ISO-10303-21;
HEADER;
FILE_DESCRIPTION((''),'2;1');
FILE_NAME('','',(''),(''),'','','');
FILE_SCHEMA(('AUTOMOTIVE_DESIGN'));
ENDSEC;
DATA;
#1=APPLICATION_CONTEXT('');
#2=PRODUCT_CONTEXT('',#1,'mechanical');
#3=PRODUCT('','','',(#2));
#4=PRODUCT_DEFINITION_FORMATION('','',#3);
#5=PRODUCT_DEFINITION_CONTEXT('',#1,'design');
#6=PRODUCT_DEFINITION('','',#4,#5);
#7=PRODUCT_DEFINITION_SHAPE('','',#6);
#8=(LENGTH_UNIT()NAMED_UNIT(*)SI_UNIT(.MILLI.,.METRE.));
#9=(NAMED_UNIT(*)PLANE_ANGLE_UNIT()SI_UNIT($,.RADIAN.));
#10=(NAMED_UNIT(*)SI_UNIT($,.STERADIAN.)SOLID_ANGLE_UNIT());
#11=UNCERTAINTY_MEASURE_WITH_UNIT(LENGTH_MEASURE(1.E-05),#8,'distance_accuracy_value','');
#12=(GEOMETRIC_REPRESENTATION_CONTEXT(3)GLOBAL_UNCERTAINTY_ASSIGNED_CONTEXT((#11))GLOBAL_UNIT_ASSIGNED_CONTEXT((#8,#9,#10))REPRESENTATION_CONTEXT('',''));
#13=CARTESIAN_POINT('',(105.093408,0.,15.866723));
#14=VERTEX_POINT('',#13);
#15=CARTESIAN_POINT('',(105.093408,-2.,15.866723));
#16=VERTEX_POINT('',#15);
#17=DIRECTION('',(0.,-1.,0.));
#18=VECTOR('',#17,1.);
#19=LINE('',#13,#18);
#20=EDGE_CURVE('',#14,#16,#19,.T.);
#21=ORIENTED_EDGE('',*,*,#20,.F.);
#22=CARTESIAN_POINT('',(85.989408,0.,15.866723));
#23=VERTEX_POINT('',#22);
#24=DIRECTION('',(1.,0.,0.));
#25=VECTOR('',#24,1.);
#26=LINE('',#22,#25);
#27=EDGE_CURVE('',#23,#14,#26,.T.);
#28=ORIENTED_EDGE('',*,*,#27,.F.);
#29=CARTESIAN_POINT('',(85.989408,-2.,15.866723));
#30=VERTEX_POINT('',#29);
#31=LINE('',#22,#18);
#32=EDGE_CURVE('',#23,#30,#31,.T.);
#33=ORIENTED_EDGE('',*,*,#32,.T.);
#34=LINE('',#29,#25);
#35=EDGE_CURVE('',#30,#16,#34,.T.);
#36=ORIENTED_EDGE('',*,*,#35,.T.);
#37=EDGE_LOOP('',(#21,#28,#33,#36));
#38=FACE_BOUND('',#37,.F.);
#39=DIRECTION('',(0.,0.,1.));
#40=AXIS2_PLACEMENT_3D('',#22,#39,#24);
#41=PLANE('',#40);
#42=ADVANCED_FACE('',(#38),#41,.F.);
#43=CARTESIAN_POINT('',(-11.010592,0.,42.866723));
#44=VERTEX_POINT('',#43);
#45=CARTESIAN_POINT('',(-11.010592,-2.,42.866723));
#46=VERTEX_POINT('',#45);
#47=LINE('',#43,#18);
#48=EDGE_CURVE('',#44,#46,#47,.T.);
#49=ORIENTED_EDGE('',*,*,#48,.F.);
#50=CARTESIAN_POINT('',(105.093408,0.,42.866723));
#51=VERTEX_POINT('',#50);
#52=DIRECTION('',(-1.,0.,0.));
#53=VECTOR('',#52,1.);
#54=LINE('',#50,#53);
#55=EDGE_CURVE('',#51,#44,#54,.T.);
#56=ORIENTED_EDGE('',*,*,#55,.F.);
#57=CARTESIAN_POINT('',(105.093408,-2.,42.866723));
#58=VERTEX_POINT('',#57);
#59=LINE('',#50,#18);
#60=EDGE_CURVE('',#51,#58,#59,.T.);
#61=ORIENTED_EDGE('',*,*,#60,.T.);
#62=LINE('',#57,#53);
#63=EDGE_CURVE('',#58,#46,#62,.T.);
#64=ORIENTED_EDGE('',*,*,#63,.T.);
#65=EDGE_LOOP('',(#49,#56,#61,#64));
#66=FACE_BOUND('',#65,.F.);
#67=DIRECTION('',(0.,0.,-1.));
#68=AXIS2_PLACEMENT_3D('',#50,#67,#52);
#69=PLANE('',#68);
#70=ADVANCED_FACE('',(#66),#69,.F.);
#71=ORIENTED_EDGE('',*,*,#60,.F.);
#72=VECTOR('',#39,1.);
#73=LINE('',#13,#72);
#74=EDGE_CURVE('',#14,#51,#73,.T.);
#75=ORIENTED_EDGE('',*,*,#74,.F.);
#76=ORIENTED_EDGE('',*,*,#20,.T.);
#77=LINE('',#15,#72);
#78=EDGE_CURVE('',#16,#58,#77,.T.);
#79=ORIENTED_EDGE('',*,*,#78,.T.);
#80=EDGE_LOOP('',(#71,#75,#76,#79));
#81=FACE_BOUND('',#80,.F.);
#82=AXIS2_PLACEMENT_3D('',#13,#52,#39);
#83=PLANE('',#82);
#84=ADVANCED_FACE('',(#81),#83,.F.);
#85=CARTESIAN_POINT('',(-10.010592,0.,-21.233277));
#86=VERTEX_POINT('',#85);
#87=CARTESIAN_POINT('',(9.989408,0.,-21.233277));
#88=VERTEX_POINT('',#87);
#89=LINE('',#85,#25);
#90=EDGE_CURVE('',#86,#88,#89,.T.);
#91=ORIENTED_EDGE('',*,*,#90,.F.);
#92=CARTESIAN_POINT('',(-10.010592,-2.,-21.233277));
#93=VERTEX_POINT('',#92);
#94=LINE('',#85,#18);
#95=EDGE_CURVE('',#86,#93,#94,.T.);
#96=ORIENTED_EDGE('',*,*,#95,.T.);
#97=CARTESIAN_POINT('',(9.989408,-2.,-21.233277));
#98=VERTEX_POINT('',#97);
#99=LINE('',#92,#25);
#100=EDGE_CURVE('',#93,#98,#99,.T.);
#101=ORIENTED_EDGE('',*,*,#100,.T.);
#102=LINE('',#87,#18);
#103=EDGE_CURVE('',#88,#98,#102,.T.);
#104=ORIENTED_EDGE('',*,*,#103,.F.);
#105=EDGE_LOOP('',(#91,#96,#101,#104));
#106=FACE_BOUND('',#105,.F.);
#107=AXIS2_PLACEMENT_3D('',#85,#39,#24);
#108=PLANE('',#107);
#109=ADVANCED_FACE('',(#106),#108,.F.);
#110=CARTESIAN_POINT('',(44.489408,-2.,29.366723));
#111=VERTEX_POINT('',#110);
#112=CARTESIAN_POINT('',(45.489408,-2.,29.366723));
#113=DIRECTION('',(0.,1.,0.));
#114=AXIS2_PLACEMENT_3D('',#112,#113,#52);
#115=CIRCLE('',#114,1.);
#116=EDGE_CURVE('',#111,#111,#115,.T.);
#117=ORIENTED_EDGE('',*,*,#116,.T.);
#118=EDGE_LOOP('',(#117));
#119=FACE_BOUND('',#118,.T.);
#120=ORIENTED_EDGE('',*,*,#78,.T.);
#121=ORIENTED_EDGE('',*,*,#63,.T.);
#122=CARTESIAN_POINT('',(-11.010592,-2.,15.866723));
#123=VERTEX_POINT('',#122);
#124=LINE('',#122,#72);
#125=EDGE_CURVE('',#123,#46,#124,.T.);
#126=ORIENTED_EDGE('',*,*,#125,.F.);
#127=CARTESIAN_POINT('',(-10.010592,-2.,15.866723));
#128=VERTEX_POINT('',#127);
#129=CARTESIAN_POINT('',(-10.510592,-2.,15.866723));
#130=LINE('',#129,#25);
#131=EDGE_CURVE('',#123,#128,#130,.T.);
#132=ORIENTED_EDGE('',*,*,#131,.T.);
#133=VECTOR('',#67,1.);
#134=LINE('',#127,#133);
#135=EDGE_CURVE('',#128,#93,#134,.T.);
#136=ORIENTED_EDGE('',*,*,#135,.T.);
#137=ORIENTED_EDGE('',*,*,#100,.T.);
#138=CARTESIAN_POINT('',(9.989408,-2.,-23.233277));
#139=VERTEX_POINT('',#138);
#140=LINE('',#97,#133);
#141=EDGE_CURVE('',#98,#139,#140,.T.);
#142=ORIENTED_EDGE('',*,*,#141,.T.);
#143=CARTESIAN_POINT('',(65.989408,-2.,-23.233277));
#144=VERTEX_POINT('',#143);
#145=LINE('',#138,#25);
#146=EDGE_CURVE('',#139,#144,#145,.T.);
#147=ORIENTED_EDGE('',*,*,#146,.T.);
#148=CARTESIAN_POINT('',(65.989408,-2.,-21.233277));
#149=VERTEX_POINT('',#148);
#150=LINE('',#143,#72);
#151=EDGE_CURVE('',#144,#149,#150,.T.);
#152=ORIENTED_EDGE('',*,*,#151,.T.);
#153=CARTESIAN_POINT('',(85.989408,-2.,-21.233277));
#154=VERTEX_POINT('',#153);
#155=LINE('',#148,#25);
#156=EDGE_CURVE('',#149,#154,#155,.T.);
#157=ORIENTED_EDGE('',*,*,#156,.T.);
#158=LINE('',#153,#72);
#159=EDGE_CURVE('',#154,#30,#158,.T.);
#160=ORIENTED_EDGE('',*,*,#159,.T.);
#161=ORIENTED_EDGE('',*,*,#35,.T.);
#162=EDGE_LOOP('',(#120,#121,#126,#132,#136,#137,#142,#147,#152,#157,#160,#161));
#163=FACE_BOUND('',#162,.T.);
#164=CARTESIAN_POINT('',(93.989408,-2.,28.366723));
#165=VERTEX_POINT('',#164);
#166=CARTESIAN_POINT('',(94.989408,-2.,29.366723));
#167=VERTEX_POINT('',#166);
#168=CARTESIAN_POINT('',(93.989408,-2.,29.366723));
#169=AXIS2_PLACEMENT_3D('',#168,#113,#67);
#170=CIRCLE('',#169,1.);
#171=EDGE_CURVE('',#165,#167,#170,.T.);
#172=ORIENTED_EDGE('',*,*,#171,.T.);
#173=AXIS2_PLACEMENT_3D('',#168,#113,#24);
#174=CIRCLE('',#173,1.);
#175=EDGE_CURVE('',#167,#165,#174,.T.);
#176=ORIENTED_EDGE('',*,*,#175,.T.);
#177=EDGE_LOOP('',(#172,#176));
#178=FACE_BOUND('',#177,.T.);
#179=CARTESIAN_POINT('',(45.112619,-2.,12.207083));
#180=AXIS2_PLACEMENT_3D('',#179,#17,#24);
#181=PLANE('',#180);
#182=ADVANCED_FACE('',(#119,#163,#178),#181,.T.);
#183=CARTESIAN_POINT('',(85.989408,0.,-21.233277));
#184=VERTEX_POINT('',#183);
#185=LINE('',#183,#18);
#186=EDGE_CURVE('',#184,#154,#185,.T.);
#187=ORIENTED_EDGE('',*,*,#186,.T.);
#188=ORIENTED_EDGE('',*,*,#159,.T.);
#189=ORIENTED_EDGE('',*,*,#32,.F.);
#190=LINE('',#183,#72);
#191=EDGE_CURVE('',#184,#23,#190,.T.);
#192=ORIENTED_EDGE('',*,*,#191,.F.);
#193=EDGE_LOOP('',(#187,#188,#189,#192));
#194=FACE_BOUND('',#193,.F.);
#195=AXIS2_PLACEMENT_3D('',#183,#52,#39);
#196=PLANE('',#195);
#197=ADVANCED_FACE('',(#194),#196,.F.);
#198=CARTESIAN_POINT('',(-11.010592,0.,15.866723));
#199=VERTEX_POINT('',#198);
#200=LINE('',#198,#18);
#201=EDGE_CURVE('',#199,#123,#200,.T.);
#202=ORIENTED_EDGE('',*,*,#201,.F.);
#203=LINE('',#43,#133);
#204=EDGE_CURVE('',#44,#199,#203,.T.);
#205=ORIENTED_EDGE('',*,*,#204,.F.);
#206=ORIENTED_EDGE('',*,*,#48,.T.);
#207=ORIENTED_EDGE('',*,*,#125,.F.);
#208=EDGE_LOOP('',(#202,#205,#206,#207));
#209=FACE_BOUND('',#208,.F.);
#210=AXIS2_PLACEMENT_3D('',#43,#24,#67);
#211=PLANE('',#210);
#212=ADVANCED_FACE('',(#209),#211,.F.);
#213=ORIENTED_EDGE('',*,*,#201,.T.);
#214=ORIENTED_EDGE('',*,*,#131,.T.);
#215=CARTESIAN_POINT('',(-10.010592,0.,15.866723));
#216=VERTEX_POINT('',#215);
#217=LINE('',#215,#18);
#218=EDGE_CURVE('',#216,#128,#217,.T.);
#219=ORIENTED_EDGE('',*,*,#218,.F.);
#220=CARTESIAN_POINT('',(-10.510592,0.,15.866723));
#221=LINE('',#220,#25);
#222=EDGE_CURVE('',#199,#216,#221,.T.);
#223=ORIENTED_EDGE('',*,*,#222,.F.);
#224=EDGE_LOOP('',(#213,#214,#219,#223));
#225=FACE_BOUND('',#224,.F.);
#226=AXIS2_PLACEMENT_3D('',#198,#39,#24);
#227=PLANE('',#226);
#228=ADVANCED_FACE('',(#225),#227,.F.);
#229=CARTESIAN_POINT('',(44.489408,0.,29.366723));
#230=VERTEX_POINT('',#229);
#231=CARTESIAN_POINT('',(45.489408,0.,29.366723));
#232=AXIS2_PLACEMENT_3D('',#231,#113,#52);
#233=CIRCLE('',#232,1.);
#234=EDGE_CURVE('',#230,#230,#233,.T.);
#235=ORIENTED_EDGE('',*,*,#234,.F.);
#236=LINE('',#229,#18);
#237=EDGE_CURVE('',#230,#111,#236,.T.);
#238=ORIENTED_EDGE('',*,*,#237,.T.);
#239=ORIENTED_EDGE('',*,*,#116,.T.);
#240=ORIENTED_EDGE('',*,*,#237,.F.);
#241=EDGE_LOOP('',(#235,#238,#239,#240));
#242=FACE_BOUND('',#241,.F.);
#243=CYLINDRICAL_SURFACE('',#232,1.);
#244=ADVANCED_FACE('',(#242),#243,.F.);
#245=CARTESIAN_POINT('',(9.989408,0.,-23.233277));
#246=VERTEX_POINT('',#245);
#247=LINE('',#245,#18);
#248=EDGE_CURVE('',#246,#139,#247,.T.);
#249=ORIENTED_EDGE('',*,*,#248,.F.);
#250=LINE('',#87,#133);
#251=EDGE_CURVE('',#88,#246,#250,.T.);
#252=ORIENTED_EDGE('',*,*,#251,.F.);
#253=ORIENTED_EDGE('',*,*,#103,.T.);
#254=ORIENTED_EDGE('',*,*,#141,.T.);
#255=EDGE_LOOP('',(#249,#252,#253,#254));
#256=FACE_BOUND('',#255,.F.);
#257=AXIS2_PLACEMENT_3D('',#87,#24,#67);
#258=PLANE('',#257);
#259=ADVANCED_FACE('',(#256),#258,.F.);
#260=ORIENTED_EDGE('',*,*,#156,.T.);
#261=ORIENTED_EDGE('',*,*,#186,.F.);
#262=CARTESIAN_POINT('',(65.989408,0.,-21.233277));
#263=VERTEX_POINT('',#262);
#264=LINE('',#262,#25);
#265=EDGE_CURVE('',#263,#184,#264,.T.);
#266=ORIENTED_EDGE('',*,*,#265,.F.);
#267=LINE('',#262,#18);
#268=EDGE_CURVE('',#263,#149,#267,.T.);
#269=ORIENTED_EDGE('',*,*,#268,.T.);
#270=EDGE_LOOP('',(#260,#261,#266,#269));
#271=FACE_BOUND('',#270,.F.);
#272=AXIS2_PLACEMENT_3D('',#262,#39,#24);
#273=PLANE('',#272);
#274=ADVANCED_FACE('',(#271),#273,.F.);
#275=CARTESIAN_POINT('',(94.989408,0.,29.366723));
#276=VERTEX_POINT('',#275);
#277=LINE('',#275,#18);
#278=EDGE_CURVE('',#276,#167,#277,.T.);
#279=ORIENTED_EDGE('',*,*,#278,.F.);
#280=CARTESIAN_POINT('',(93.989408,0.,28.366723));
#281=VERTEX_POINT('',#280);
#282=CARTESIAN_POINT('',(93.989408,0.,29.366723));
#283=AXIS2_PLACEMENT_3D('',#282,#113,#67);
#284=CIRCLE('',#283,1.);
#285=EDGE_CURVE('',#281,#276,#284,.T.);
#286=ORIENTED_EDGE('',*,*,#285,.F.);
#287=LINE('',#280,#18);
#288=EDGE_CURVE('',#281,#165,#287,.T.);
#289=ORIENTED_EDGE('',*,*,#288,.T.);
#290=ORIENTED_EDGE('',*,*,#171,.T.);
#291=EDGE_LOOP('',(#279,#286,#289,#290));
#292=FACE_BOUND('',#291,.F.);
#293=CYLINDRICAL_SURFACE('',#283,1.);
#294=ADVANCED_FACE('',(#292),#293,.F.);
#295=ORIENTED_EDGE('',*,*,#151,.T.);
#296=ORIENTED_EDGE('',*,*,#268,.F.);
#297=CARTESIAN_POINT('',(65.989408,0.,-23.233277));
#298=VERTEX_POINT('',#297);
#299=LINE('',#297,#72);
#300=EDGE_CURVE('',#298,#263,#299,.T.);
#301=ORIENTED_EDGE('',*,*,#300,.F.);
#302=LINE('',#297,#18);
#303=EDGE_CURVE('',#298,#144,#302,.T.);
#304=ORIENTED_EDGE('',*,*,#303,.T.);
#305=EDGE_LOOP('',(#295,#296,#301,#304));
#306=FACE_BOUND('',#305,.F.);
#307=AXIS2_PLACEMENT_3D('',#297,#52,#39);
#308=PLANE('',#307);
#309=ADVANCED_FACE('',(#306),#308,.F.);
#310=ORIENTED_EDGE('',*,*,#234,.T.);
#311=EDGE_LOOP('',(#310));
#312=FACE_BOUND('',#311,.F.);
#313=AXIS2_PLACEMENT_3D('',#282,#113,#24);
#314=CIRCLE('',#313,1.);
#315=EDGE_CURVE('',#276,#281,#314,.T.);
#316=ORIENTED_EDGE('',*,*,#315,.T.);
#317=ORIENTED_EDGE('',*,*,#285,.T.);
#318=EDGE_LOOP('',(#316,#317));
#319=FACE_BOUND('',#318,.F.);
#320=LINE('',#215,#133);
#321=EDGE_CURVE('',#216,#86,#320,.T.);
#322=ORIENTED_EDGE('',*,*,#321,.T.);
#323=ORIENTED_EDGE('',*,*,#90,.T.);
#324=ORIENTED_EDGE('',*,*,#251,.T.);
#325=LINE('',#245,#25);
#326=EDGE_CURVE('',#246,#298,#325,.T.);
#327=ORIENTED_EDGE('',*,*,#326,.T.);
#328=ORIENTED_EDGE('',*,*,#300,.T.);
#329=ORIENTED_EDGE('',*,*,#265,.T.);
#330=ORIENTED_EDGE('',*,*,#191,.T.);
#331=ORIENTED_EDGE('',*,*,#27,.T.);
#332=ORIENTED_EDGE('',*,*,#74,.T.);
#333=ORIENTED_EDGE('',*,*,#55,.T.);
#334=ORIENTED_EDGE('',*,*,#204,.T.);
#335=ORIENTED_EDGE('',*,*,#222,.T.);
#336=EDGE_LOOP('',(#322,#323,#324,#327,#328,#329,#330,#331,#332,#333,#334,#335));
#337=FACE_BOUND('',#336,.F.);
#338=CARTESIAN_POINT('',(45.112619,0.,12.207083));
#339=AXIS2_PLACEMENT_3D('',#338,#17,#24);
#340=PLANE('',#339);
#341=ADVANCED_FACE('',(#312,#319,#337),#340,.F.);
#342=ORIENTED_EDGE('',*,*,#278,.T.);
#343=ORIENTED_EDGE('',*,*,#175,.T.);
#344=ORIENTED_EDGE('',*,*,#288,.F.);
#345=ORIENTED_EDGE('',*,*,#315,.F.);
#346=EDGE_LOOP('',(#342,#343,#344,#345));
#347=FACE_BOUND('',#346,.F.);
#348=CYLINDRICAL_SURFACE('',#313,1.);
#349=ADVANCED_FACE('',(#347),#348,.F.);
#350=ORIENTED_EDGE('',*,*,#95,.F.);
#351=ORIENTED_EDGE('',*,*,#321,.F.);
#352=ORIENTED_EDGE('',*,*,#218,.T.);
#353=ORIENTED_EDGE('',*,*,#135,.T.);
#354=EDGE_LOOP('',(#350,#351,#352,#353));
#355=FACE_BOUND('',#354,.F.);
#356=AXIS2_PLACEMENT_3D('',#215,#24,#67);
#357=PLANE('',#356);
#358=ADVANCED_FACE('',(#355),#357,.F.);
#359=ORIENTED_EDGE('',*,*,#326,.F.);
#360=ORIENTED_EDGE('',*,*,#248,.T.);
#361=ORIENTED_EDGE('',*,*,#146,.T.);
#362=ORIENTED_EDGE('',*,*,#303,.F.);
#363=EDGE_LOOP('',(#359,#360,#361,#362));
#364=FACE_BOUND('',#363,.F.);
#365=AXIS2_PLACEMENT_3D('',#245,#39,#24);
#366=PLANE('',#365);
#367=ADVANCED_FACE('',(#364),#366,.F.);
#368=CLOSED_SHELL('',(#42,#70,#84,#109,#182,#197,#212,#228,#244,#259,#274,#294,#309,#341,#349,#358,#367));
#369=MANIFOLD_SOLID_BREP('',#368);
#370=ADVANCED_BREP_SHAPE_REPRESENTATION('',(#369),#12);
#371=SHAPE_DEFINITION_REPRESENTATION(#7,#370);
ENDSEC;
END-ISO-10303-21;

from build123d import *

# Parameters (mm, degrees)
F0_W     = 1
F0_H     = 5
F1_DEPTH = 2
F2_DEPTH = 2


# Not quite as in the source:
# - a feature names something its author has since deleted; it is built from what else it names


with BuildPart() as f1:
    # F0 (on Front) → F1 (new body)
    with BuildSketch(Plane.XZ):
        Polygon((-11.0105917081, 20.8667229116), (-10.0105917081, 20.8667229116), (-10.0105917081, 15.8667229116), (-10.0105917081, -14.7727085277), (-10.0105917081, -21.2332770884), (9.9894082919, -21.2332770884), (9.9894082919, -23.2332770884), (37.9894082919, -23.2332770884), (65.9894082919, -23.2332770884), (65.9894082919, -21.2332770884), (85.9894082919, -21.2332770884), (85.9894082919, -14.7727085277), (85.9894082919, 15.8667229116), (98.9894082919, 15.8667229116), (103.9894082919, 15.8667229116), (105.0934082919, 15.8667229116), (105.0934082919, 42.8667229116), (103.9894082919, 42.8667229116), (98.9894082919, 42.8667229116), (93.9894082919, 42.8667229116), (37.9894082919, 42.8667229116), (-10.0105917081, 42.8667229116), (-11.0105917081, 42.8667229116), align=None)
        with BuildLine():
            ThreePointArc((46.4894082919, 29.3667229116), (45.4894082919, 28.3667229116), (44.4894082919, 29.3667229116))
            ThreePointArc((44.4894082919, 29.3667229116), (45.4894082919, 30.3667229116), (46.4894082919, 29.3667229116))
        make_face(mode=Mode.SUBTRACT)
        with BuildLine():
            ThreePointArc((93.9894082919, 28.3667229116), (93.2823015107, 30.0738296928), (94.9894082919, 29.3667229116))
            ThreePointArc((94.9894082919, 29.3667229116), (94.6965150731, 28.6596161304), (93.9894082919, 28.3667229116))
        make_face(mode=Mode.SUBTRACT)
        with Locations((-10.5105917081, 18.3667229116)):
            Rectangle(F0_W, F0_H)
    extrude(amount=F1_DEPTH)

    # F0 (on Front) → F2 (join)
    with BuildSketch(Plane.XZ):
        Polygon((-11.0105917081, 20.8667229116), (-10.0105917081, 20.8667229116), (-10.0105917081, 15.8667229116), (-10.0105917081, -14.7727085277), (-10.0105917081, -21.2332770884), (9.9894082919, -21.2332770884), (9.9894082919, -23.2332770884), (37.9894082919, -23.2332770884), (65.9894082919, -23.2332770884), (65.9894082919, -21.2332770884), (85.9894082919, -21.2332770884), (85.9894082919, -14.7727085277), (85.9894082919, 15.8667229116), (98.9894082919, 15.8667229116), (103.9894082919, 15.8667229116), (105.0934082919, 15.8667229116), (105.0934082919, 42.8667229116), (103.9894082919, 42.8667229116), (98.9894082919, 42.8667229116), (93.9894082919, 42.8667229116), (37.9894082919, 42.8667229116), (-10.0105917081, 42.8667229116), (-11.0105917081, 42.8667229116), align=None)
        with BuildLine():
            ThreePointArc((46.4894082919, 29.3667229116), (45.4894082919, 28.3667229116), (44.4894082919, 29.3667229116))
            ThreePointArc((44.4894082919, 29.3667229116), (45.4894082919, 30.3667229116), (46.4894082919, 29.3667229116))
        make_face(mode=Mode.SUBTRACT)
        with BuildLine():
            ThreePointArc((93.9894082919, 28.3667229116), (93.2823015107, 30.0738296928), (94.9894082919, 29.3667229116))
            ThreePointArc((94.9894082919, 29.3667229116), (94.6965150731, 28.6596161304), (93.9894082919, 28.3667229116))
        make_face(mode=Mode.SUBTRACT)
    extrude(amount=F2_DEPTH)


solid = f1.part
